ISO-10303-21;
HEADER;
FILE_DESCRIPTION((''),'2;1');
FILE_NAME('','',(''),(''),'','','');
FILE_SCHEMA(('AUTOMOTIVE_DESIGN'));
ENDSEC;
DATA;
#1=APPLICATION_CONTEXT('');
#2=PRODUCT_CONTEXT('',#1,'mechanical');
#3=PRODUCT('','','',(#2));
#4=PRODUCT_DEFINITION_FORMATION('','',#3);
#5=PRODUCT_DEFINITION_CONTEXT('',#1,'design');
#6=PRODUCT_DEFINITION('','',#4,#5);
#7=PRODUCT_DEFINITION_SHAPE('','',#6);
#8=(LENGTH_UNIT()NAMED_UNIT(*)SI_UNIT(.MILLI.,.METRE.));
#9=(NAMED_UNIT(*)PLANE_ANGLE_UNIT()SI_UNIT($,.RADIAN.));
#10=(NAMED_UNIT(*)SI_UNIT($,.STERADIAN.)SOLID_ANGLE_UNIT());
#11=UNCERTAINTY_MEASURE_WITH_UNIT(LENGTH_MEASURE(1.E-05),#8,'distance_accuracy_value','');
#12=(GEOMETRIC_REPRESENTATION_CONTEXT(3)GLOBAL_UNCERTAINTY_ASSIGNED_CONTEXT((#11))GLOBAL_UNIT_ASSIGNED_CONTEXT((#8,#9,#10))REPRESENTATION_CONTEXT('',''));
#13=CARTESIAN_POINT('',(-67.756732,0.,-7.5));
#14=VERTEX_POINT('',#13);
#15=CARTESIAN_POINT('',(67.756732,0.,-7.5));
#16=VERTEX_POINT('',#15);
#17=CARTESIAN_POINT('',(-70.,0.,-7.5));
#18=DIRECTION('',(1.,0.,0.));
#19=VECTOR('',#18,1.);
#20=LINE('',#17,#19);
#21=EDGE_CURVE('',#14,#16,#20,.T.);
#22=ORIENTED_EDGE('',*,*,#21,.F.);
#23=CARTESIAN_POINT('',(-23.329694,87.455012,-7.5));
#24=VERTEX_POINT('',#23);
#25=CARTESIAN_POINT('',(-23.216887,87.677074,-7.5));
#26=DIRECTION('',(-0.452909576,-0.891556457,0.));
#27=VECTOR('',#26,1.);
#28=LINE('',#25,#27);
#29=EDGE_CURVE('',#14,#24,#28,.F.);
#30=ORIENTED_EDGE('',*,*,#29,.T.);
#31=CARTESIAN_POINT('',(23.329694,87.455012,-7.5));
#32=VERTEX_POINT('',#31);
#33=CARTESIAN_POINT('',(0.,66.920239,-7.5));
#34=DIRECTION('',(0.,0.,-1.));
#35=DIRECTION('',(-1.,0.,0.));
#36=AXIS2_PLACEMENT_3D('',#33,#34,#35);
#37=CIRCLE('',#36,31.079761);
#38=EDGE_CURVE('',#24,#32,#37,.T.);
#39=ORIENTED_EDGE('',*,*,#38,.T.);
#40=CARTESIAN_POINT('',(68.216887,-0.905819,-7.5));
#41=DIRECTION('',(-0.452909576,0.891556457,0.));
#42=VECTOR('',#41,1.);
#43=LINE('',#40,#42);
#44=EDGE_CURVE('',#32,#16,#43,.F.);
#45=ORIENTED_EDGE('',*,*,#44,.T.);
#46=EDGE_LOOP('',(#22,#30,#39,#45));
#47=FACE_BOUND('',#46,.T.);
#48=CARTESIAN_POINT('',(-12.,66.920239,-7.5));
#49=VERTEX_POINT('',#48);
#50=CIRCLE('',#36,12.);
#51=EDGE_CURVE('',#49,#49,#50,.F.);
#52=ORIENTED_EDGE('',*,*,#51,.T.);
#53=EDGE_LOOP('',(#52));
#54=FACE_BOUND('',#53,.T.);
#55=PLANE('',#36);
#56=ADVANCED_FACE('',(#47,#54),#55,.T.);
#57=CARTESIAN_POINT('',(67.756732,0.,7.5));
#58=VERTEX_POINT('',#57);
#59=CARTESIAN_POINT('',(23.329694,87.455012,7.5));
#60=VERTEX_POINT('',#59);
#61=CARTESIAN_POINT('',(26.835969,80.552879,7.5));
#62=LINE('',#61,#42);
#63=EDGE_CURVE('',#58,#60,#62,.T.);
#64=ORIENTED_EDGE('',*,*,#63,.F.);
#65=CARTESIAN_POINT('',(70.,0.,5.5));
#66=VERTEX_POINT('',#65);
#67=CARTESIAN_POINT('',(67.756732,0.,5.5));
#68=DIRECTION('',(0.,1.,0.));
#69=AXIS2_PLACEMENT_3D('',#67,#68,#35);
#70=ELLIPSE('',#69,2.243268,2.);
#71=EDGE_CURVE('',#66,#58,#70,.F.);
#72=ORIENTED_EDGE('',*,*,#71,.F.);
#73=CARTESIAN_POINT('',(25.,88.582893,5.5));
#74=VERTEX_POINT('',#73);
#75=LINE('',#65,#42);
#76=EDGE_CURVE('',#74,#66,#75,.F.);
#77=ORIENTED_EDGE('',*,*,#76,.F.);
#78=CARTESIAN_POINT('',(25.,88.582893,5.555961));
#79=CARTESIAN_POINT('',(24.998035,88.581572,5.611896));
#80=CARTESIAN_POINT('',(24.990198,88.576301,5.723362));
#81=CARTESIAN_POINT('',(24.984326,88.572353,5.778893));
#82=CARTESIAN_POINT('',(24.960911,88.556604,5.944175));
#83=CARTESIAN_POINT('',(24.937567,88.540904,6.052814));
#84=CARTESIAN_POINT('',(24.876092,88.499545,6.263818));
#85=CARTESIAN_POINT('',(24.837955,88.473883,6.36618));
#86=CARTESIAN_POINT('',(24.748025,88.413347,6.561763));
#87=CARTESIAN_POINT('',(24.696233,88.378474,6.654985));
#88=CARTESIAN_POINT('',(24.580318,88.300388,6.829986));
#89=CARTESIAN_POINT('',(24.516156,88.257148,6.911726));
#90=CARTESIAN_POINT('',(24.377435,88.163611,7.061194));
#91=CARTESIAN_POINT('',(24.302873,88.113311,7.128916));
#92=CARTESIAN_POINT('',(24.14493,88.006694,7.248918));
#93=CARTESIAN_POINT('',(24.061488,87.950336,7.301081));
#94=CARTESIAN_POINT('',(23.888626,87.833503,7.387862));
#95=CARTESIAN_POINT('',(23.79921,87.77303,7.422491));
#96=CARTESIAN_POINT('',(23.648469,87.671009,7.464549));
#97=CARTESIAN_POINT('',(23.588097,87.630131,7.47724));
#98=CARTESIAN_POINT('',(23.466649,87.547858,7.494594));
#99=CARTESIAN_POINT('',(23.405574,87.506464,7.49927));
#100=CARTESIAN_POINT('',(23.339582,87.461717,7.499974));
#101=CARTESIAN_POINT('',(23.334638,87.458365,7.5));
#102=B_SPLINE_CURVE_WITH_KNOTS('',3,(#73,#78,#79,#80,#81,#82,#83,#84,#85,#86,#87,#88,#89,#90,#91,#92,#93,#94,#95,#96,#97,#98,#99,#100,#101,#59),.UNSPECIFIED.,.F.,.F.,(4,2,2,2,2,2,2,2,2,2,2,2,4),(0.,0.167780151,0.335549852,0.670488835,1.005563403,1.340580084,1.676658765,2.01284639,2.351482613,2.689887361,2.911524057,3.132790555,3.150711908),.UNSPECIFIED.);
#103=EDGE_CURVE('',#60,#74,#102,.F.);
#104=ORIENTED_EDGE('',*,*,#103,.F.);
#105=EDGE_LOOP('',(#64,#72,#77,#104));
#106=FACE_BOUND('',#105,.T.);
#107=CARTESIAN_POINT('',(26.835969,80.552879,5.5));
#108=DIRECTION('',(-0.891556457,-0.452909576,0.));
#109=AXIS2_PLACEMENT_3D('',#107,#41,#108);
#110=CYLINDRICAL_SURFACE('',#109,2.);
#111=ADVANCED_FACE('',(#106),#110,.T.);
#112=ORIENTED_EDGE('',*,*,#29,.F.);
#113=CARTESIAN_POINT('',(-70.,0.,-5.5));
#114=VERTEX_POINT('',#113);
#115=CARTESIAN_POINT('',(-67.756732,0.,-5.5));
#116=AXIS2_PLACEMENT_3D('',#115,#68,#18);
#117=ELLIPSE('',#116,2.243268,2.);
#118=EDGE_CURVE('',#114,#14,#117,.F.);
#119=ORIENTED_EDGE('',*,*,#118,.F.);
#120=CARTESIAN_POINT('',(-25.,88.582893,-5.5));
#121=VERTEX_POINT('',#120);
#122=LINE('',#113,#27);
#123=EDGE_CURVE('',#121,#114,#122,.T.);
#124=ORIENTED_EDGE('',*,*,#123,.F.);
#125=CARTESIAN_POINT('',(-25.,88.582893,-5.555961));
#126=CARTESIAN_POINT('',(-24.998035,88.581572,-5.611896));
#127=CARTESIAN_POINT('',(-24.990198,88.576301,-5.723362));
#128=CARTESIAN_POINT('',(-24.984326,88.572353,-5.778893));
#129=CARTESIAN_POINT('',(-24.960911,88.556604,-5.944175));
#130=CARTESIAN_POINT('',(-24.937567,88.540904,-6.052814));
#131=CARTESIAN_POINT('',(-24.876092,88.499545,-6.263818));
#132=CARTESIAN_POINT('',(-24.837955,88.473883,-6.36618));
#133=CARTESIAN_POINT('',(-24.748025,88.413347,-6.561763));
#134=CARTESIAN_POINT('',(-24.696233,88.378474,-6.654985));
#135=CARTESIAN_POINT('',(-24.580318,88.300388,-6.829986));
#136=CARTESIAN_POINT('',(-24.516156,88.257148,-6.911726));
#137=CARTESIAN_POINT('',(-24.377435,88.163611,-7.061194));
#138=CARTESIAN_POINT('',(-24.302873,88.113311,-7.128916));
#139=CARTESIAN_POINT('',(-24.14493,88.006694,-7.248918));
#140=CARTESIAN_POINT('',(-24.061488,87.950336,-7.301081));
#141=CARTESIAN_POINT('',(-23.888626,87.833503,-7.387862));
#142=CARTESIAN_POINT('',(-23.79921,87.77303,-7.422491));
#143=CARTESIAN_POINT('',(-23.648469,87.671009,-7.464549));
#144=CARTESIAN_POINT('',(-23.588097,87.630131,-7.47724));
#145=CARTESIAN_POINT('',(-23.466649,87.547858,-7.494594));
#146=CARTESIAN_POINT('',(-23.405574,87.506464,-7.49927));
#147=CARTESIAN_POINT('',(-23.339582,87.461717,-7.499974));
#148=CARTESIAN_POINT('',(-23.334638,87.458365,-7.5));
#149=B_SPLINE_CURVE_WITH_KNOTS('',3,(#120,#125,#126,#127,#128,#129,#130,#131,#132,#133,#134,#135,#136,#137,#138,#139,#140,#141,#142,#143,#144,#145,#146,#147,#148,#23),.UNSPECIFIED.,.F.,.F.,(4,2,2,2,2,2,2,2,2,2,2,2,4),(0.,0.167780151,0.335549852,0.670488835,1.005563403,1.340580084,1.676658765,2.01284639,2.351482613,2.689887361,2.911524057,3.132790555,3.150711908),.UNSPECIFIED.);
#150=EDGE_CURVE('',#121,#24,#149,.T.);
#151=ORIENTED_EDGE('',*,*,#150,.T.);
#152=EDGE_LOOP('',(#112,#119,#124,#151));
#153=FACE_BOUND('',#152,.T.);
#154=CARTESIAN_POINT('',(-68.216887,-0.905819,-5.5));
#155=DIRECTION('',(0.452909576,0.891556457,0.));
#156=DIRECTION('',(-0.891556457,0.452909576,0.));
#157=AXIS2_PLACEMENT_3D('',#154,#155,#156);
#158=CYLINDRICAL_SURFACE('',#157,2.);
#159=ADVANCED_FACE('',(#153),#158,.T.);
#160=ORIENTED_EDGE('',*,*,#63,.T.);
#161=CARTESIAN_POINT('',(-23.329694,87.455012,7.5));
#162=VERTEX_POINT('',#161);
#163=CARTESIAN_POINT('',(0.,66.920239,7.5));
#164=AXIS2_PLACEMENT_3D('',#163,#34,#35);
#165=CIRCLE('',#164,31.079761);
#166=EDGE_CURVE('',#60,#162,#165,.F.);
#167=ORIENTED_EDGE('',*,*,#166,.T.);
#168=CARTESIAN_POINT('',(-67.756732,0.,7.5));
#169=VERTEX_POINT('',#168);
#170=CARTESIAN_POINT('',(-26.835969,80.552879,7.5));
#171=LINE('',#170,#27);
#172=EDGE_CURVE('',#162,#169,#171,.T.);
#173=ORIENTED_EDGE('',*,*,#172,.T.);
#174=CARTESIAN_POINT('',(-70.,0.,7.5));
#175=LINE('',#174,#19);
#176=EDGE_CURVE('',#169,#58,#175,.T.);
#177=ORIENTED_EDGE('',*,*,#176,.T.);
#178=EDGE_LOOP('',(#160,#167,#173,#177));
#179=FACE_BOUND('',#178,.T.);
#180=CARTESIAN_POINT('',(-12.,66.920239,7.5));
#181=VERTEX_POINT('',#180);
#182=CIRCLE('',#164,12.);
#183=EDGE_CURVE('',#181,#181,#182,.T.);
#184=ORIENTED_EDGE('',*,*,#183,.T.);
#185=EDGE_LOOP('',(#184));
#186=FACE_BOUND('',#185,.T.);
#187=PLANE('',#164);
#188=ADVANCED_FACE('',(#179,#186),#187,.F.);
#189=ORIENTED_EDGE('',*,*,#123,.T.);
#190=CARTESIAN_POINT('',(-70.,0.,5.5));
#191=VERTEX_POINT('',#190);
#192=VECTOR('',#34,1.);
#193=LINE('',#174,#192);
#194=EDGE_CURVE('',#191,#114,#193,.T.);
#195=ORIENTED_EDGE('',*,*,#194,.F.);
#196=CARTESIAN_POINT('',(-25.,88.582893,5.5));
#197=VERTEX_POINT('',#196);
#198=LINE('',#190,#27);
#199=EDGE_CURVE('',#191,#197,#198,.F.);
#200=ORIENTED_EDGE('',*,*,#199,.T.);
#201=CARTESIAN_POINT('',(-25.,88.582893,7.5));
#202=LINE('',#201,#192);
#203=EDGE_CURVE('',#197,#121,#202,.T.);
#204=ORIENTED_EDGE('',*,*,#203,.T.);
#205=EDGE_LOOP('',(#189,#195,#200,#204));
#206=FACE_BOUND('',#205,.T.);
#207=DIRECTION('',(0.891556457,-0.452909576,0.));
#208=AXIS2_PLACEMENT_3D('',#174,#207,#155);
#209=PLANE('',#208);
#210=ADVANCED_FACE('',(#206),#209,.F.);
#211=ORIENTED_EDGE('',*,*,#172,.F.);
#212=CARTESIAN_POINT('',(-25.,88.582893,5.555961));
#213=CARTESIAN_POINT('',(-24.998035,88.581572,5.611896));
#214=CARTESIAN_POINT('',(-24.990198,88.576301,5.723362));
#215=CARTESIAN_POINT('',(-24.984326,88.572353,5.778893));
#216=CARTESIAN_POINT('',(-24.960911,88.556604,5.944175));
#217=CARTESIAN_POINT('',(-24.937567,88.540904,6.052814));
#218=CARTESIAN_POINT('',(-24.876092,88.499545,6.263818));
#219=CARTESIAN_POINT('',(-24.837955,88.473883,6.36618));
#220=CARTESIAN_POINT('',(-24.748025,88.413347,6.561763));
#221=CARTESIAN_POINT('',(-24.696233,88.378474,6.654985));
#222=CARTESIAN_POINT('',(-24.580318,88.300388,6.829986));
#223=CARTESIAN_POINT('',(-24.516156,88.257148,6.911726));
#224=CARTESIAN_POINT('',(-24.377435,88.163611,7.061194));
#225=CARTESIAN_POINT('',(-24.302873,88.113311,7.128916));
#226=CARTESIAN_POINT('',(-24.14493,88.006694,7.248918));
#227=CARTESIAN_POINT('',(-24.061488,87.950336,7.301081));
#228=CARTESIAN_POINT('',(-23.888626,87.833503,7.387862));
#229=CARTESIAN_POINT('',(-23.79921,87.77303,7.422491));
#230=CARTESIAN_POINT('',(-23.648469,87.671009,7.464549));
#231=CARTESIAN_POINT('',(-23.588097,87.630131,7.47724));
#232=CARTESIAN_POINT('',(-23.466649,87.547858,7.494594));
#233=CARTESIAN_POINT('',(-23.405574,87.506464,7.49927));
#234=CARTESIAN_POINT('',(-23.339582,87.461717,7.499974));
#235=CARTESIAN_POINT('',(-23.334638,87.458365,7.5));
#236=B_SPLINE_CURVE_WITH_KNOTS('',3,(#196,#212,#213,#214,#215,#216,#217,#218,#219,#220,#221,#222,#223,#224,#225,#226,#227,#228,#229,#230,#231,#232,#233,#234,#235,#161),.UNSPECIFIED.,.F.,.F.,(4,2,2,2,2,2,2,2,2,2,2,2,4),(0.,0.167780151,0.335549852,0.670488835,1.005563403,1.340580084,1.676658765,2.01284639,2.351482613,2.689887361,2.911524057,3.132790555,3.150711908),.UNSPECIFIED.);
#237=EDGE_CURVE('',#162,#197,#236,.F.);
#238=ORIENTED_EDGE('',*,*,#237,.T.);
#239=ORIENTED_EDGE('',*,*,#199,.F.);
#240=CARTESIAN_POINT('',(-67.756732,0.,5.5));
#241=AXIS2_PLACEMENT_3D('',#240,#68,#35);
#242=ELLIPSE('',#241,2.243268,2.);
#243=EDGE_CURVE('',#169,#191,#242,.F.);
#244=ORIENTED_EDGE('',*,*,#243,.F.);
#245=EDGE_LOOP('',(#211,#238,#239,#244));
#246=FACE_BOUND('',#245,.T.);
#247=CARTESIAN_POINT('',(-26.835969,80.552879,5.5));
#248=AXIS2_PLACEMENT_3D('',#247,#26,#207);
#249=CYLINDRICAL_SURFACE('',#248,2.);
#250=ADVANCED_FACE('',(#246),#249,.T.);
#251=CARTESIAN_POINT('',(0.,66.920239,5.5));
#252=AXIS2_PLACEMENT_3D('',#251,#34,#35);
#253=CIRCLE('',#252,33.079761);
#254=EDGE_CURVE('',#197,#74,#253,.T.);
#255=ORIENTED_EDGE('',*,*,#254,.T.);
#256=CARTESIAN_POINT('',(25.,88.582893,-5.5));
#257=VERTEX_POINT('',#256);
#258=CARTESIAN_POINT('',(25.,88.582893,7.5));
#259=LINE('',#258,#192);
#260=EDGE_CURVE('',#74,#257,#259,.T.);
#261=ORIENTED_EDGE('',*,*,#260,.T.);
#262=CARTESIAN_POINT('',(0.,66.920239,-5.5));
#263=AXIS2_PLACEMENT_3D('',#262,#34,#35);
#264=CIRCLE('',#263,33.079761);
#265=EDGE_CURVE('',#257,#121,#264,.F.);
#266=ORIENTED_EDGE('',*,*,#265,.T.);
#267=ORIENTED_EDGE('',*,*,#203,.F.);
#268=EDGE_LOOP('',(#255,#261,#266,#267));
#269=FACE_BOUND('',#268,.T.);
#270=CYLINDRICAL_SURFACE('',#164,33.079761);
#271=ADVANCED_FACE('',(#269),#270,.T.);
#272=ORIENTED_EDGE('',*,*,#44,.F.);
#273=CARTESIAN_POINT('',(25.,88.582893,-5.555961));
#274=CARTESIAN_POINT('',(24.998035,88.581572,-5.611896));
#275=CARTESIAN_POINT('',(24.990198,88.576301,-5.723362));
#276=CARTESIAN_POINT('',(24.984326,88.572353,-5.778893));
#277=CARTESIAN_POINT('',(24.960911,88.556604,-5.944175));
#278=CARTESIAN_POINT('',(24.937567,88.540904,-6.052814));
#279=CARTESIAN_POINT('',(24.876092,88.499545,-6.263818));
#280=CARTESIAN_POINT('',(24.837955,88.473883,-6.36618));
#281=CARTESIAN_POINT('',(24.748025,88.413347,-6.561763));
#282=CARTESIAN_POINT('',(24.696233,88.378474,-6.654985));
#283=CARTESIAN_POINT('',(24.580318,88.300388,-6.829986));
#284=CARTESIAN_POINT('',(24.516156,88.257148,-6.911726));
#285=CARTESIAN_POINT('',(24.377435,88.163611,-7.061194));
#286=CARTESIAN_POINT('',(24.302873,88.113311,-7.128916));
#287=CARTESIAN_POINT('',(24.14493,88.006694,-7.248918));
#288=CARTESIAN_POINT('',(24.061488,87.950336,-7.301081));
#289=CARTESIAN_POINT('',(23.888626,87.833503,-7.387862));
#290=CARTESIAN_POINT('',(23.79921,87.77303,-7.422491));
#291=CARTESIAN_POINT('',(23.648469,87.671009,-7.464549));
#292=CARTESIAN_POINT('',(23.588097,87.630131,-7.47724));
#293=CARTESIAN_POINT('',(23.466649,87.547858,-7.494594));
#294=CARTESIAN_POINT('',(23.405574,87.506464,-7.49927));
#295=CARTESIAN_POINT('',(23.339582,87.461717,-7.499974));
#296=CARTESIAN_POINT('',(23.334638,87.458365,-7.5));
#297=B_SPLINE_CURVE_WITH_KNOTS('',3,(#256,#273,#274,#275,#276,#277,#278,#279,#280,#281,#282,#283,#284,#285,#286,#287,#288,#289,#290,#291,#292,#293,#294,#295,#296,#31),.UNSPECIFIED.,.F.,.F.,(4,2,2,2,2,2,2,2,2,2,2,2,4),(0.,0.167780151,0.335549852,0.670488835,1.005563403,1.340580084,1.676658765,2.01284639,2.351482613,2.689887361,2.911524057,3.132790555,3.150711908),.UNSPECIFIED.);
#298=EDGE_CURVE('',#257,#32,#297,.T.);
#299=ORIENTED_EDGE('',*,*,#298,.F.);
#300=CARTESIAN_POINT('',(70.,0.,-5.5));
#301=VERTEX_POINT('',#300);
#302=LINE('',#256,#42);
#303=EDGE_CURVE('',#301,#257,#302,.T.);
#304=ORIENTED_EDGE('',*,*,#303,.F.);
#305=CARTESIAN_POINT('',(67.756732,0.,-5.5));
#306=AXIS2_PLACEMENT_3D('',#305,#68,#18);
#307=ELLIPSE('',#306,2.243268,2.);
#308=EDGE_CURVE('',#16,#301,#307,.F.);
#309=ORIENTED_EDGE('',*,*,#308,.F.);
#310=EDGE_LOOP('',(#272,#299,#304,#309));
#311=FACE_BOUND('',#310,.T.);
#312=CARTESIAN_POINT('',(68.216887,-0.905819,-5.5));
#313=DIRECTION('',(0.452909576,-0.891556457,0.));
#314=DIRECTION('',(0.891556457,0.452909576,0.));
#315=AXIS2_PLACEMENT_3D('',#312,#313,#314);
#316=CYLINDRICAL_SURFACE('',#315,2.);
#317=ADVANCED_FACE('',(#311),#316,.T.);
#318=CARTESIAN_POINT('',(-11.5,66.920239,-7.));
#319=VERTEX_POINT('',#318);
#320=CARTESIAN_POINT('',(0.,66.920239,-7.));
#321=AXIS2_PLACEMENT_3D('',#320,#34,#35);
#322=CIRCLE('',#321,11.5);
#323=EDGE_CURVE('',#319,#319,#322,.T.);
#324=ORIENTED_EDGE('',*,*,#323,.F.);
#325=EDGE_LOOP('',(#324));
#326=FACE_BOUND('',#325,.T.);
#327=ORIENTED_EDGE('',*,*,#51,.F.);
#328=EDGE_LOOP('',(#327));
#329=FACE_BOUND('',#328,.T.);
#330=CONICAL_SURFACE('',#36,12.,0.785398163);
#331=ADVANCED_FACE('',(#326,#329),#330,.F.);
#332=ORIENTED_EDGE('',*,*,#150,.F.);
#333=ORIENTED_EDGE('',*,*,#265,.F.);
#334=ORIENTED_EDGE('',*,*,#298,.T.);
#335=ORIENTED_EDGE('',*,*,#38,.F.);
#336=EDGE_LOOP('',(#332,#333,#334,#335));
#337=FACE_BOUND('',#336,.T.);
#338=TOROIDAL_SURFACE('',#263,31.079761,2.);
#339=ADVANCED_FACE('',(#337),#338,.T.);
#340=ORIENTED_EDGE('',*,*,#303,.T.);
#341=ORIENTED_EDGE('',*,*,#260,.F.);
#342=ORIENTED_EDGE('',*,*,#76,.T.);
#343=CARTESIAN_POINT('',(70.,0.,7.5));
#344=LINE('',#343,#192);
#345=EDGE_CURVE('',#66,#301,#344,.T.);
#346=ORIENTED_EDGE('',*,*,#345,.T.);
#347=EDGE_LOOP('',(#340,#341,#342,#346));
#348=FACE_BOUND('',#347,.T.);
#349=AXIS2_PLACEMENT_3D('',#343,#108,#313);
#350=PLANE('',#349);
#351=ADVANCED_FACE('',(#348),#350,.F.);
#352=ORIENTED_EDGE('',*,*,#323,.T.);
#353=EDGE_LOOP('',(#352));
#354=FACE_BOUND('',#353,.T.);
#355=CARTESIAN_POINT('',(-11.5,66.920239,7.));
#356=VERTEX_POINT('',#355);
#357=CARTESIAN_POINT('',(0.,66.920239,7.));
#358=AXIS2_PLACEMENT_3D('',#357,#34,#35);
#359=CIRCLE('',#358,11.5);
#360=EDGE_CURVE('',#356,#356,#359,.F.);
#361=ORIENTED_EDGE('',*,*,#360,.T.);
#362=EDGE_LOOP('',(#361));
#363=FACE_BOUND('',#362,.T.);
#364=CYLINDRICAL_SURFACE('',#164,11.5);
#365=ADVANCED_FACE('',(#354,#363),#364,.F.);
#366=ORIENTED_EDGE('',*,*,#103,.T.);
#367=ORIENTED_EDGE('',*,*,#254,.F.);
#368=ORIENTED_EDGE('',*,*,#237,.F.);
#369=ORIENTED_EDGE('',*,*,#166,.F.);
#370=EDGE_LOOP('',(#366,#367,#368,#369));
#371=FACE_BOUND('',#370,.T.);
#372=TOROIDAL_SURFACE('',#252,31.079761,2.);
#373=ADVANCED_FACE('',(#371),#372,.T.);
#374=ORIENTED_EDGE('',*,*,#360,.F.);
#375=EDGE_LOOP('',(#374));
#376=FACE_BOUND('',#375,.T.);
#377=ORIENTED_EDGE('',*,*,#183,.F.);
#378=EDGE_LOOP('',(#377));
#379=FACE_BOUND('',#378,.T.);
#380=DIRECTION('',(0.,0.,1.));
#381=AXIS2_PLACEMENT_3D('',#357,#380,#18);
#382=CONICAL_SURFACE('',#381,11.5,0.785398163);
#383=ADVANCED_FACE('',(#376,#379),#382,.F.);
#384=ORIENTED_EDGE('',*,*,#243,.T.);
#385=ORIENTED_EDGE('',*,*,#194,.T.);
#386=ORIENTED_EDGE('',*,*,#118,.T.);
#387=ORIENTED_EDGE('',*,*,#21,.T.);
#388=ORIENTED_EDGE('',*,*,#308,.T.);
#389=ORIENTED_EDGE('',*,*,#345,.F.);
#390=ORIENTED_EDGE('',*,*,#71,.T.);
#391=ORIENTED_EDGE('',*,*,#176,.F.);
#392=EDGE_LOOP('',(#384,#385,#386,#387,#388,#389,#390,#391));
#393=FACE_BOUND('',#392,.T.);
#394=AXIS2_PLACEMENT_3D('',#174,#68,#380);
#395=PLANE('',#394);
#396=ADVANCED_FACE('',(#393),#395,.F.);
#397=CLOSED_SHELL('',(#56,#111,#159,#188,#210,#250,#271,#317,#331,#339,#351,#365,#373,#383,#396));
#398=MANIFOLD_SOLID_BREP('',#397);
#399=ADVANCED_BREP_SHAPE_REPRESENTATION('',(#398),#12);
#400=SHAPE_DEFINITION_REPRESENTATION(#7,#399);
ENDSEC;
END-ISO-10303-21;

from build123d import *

# Parameters (mm, degrees)
SKETCH1_R           = 11.5
BOSS_EXTRUDE1_DEPTH = 7.5
FILLET1_R           = 2
CHAMFER1_SIZE       = 0.5


with BuildPart() as part:
    # Sketch1 → Boss-Extrude1 (new, symmetric)
    with BuildSketch(Plane.XY):
        with BuildLine():
            Line((-70, 0), (70, 0))
            Line((70, 0), (25, 88.582893039))
            ThreePointArc((25, 88.582893039), (0, 100), (-25, 88.582893039))
            Line((-25, 88.582893039), (-70, 0))
        make_face()
        with Locations((0, 66.920239342)):
            Circle(SKETCH1_R, mode=Mode.SUBTRACT)
    extrude(amount=BOSS_EXTRUDE1_DEPTH, both=True)

    # Fillet1
    # the kernel refuses this fillet: 2 mm, written as the material it takes off along each edge
    with BuildSketch(Plane(origin=(72.264547882, -4.457782284, 7.5), x_dir=(0, 0, -1), z_dir=(-0.45290957632946743, 0.8915564568040896, 0)), Plane(origin=(-22.735452118, 93.040675323, 7.5), x_dir=(0, 0, -1), z_dir=(-0.45290957632946743, -0.8915564568040896, 0))) as fillet1_piece_1:
        with BuildLine():
            CenterArc((FILLET1_R, FILLET1_R), FILLET1_R, 180, 90)
            Line((0, FILLET1_R), (0, 0))
            Line((0, 0), (FILLET1_R, 0))
        make_face()
    extrude(amount=109.357581186, mode=Mode.SUBTRACT)
    with BuildSketch(Plane(origin=(0, 66.920239342, 7.5), x_dir=(0.8457767754384001, 0.5335369210551618, 0), z_dir=(0.5335369210551618, -0.8457767754384001, 0))) as fillet1_piece_2:
        with BuildLine():
            CenterArc((33.079760658 - FILLET1_R, -FILLET1_R), FILLET1_R, 0, 90)
            Line((33.079760658 - FILLET1_R, 0), (33.079760658, 0))
            Line((33.079760658, 0), (33.079760658, -FILLET1_R))
        make_face()
    revolve(axis=Axis((0, 66.920239342, 7.5), (0, 0, 1)), revolution_arc=115.510513381, mode=Mode.SUBTRACT)
    with BuildSketch(Plane(origin=(0, 66.920239342, -7.5), x_dir=(0.8457767754384001, 0.5335369210551618, 0), z_dir=(0.5335369210551618, -0.8457767754384001, 0))) as fillet1_piece_3:
        with BuildLine():
            CenterArc((33.079760658 - FILLET1_R, FILLET1_R), FILLET1_R, 270, 90)
            Line((33.079760658 - FILLET1_R, 0), (33.079760658, 0))
            Line((33.079760658, 0), (33.079760658, FILLET1_R))
        make_face()
    revolve(axis=Axis((0, 66.920239342, -7.5), (0, 0, 1)), revolution_arc=115.510513381, mode=Mode.SUBTRACT)
    with BuildSketch(Plane(origin=(72.264547882, -4.457782284, -7.5), x_dir=(0, 0, 1), z_dir=(-0.45290957632946743, 0.8915564568040896, 0)), Plane(origin=(-22.735452118, 93.040675323, -7.5), x_dir=(0, 0, 1), z_dir=(-0.45290957632946743, -0.8915564568040896, 0))) as fillet1_piece_4:
        with BuildLine():
            CenterArc((FILLET1_R, -FILLET1_R), FILLET1_R, 90, 90)
            Line((0, -FILLET1_R), (0, 0))
            Line((0, 0), (FILLET1_R, 0))
        make_face()
    extrude(amount=109.357581186, mode=Mode.SUBTRACT)

    # Chamfer1
    chamfer1_edges = [part.edges().sort_by_distance(p)[0] for p in [
        (-11.5, 66.920239342, -7.5),
        (-11.5, 66.920239342, 7.5),
    ]]
    chamfer(chamfer1_edges, length=CHAMFER1_SIZE)


solid = part.part
